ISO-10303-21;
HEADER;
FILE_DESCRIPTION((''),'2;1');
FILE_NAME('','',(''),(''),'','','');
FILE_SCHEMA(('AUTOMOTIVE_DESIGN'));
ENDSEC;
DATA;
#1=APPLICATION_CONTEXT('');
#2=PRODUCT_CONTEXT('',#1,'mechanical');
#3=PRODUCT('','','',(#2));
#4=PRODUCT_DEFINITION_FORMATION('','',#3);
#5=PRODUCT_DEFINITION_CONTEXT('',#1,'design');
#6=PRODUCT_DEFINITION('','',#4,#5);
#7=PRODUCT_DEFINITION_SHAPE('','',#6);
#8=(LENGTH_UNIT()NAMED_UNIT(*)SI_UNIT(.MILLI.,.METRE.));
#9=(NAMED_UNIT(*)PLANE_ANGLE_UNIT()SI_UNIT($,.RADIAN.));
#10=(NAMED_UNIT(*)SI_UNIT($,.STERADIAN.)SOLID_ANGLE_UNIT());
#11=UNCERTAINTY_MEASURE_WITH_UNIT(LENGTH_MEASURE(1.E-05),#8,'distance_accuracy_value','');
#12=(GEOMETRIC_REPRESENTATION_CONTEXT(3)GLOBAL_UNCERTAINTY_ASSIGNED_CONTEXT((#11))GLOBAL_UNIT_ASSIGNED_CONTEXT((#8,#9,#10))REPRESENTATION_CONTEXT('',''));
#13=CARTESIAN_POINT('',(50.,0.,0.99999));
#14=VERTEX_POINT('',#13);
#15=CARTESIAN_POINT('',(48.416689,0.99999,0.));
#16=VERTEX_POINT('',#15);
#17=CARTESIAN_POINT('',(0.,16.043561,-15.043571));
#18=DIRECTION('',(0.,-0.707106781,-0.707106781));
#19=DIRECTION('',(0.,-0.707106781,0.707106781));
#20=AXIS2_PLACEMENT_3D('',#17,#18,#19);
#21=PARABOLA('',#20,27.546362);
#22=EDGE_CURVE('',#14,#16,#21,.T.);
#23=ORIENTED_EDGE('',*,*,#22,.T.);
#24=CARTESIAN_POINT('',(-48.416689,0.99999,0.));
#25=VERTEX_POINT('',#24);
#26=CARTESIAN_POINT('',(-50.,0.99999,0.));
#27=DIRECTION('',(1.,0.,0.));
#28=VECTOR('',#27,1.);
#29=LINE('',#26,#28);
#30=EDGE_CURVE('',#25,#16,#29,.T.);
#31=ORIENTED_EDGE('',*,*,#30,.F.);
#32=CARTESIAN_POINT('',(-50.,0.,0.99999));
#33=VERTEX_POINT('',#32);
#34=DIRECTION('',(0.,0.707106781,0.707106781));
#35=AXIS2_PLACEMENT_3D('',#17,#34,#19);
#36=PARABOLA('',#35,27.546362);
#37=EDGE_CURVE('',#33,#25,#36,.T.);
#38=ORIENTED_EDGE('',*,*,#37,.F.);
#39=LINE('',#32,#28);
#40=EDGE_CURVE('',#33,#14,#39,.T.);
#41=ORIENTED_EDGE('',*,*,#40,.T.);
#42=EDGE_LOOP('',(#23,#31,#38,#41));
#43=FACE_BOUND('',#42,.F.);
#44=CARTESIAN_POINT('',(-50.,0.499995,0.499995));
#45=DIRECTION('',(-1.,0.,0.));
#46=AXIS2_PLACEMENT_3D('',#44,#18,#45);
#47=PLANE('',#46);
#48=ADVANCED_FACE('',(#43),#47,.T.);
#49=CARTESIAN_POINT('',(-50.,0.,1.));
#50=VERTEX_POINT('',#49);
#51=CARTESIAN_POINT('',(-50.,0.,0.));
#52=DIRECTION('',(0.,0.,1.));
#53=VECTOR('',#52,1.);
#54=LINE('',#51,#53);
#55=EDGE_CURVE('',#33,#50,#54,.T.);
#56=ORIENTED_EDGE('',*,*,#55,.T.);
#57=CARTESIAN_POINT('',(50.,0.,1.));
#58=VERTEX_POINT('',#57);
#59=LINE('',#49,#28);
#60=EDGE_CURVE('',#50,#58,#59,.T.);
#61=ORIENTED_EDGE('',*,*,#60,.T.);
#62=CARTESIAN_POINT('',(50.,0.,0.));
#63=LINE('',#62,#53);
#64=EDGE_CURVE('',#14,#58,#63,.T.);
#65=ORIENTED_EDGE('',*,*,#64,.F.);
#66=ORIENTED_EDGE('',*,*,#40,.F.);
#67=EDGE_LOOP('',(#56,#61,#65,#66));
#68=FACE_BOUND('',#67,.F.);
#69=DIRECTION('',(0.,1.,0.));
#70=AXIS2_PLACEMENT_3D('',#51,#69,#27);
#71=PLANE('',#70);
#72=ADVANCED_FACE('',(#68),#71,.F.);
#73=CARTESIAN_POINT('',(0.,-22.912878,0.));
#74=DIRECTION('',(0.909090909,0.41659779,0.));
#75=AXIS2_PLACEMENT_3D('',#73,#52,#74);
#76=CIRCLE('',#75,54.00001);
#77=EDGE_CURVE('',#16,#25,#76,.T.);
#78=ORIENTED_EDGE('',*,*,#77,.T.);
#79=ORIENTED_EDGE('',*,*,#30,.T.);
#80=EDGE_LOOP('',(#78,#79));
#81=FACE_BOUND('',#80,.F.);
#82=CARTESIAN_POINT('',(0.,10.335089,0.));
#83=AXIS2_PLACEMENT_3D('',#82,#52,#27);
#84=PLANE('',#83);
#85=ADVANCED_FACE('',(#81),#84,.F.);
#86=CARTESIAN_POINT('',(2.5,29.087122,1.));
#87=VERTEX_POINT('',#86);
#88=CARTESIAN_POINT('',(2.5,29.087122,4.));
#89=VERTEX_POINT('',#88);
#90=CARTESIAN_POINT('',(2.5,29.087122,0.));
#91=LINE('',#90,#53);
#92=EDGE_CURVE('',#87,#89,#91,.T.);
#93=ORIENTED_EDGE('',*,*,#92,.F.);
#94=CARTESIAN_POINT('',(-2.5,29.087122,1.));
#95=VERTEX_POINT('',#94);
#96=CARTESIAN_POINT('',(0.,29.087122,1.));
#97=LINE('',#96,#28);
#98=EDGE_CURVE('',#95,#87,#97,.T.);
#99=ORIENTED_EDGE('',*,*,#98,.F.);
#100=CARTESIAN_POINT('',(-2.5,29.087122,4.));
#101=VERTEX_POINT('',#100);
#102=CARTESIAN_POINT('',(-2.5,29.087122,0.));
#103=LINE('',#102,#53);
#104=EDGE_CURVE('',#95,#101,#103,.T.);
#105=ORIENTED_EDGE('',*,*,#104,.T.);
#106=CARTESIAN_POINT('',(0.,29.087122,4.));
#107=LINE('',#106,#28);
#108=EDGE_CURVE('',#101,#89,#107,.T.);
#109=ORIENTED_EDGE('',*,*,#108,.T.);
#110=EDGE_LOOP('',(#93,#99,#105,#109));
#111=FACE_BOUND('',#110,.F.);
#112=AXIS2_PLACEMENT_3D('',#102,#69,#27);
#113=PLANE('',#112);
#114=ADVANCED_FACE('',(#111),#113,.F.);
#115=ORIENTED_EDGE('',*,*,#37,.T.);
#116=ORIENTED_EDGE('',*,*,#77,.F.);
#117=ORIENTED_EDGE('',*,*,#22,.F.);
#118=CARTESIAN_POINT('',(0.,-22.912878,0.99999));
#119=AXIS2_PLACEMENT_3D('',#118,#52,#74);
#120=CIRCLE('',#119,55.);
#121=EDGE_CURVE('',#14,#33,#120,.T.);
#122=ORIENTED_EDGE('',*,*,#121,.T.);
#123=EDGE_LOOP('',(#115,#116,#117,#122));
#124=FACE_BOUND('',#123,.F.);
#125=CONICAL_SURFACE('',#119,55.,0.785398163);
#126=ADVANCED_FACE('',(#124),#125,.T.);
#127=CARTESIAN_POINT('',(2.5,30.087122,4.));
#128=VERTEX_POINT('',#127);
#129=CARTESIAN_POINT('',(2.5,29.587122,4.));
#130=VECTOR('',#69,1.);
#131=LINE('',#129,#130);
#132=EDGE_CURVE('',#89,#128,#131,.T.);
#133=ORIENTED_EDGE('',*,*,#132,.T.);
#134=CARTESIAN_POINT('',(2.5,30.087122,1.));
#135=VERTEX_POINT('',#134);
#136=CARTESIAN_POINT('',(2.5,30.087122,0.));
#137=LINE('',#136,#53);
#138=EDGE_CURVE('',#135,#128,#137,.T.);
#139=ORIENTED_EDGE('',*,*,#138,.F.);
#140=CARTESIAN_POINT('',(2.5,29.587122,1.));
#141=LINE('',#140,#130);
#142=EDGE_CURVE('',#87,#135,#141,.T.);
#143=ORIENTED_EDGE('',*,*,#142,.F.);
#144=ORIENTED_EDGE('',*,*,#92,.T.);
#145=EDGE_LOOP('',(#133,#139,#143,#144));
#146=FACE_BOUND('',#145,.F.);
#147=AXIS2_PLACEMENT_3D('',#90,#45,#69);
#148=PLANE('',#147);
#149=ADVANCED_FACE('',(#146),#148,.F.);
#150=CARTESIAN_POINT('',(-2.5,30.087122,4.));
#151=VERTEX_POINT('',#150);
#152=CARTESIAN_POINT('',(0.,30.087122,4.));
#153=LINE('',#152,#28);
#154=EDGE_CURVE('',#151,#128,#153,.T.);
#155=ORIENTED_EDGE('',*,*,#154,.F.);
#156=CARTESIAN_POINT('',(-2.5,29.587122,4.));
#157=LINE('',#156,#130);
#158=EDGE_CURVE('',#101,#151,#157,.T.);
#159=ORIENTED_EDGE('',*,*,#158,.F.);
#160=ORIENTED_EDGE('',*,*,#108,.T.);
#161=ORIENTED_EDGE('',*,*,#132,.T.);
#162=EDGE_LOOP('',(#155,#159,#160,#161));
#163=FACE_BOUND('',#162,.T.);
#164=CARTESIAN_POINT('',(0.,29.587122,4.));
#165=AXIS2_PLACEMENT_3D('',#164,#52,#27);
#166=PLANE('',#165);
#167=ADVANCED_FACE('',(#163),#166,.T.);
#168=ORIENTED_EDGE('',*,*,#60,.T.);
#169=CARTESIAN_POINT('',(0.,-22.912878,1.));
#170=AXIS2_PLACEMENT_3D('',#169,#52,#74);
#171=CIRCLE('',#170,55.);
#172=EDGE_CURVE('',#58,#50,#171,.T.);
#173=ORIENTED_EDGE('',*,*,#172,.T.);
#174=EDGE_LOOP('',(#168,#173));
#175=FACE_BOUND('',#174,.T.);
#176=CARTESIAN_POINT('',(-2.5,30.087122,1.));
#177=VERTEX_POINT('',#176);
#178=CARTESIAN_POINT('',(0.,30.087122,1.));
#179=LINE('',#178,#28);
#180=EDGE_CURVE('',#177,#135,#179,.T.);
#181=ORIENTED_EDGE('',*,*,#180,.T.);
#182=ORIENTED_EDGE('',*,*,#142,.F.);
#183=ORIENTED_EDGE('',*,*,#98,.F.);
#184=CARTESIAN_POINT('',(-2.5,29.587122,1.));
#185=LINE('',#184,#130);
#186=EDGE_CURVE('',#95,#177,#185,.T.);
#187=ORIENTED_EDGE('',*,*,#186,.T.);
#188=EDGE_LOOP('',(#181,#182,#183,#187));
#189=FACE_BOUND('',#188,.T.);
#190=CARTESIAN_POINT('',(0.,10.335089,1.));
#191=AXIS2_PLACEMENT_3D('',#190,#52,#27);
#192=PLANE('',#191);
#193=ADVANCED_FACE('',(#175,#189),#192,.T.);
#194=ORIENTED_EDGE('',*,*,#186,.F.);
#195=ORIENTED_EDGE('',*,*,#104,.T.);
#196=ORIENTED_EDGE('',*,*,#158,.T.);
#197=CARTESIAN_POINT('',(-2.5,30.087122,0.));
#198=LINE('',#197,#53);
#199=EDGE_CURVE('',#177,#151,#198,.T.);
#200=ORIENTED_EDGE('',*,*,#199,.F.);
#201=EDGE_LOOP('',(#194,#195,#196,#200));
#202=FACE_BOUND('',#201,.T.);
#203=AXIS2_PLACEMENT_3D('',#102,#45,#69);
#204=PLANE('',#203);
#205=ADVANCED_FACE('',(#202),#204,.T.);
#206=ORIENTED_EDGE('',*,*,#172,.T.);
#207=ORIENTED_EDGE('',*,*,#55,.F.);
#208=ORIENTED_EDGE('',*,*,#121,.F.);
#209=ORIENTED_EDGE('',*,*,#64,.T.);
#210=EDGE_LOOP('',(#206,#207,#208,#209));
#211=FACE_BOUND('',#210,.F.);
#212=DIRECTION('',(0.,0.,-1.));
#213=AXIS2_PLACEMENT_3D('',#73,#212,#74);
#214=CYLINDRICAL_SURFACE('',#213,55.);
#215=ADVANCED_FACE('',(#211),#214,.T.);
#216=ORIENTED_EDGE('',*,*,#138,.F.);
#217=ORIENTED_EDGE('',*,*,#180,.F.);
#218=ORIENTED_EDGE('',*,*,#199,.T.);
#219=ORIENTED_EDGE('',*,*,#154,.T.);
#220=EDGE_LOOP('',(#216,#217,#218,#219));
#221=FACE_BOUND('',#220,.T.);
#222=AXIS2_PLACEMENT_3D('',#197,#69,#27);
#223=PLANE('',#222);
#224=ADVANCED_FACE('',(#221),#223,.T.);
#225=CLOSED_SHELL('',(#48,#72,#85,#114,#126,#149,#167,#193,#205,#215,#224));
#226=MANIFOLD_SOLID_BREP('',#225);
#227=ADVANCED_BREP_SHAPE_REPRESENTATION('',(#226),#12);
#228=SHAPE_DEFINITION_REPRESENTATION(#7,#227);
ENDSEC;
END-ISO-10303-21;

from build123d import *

# Parameters (mm, degrees)
F0_W     = 5
F0_H     = 1
F1_DEPTH = 4
F2_DEPTH = 1
F3_SIZE  = 0.99999


# Not quite as in the source:
# - a fillet or chamfer is up to 0.001 mm smaller than in the source, because OpenCascade refuses the exact size


with BuildPart() as f1:
    # F0 (on Top) → F1 (new body)
    with BuildSketch(Plane.XY):
        with Locations((0, 29.5871215252)):
            Rectangle(F0_W, F0_H)
    extrude(amount=F1_DEPTH)

    # F0 (on Top) → F2 (join)
    with BuildSketch(Plane.XY):
        with BuildLine():
            Line((-50, 0), (50, 0))
            ThreePointArc((50, 0), (0, 32.0871215252), (-50, 0))
        make_face()
        with Locations((0, 29.5871215252)):
            Rectangle(F0_W, F0_H, mode=Mode.SUBTRACT)
    extrude(amount=F2_DEPTH)

    # F3 (size 1 in the source; OpenCascade refuses exactly that, so slightly less here)
    f3_edges = [f1.edges().sort_by_distance(p)[0] for p in [
        (0, 32.087122, 0),
        (0, 0, 0),
    ]]
    chamfer(f3_edges, length=F3_SIZE)


solid = f1.part
